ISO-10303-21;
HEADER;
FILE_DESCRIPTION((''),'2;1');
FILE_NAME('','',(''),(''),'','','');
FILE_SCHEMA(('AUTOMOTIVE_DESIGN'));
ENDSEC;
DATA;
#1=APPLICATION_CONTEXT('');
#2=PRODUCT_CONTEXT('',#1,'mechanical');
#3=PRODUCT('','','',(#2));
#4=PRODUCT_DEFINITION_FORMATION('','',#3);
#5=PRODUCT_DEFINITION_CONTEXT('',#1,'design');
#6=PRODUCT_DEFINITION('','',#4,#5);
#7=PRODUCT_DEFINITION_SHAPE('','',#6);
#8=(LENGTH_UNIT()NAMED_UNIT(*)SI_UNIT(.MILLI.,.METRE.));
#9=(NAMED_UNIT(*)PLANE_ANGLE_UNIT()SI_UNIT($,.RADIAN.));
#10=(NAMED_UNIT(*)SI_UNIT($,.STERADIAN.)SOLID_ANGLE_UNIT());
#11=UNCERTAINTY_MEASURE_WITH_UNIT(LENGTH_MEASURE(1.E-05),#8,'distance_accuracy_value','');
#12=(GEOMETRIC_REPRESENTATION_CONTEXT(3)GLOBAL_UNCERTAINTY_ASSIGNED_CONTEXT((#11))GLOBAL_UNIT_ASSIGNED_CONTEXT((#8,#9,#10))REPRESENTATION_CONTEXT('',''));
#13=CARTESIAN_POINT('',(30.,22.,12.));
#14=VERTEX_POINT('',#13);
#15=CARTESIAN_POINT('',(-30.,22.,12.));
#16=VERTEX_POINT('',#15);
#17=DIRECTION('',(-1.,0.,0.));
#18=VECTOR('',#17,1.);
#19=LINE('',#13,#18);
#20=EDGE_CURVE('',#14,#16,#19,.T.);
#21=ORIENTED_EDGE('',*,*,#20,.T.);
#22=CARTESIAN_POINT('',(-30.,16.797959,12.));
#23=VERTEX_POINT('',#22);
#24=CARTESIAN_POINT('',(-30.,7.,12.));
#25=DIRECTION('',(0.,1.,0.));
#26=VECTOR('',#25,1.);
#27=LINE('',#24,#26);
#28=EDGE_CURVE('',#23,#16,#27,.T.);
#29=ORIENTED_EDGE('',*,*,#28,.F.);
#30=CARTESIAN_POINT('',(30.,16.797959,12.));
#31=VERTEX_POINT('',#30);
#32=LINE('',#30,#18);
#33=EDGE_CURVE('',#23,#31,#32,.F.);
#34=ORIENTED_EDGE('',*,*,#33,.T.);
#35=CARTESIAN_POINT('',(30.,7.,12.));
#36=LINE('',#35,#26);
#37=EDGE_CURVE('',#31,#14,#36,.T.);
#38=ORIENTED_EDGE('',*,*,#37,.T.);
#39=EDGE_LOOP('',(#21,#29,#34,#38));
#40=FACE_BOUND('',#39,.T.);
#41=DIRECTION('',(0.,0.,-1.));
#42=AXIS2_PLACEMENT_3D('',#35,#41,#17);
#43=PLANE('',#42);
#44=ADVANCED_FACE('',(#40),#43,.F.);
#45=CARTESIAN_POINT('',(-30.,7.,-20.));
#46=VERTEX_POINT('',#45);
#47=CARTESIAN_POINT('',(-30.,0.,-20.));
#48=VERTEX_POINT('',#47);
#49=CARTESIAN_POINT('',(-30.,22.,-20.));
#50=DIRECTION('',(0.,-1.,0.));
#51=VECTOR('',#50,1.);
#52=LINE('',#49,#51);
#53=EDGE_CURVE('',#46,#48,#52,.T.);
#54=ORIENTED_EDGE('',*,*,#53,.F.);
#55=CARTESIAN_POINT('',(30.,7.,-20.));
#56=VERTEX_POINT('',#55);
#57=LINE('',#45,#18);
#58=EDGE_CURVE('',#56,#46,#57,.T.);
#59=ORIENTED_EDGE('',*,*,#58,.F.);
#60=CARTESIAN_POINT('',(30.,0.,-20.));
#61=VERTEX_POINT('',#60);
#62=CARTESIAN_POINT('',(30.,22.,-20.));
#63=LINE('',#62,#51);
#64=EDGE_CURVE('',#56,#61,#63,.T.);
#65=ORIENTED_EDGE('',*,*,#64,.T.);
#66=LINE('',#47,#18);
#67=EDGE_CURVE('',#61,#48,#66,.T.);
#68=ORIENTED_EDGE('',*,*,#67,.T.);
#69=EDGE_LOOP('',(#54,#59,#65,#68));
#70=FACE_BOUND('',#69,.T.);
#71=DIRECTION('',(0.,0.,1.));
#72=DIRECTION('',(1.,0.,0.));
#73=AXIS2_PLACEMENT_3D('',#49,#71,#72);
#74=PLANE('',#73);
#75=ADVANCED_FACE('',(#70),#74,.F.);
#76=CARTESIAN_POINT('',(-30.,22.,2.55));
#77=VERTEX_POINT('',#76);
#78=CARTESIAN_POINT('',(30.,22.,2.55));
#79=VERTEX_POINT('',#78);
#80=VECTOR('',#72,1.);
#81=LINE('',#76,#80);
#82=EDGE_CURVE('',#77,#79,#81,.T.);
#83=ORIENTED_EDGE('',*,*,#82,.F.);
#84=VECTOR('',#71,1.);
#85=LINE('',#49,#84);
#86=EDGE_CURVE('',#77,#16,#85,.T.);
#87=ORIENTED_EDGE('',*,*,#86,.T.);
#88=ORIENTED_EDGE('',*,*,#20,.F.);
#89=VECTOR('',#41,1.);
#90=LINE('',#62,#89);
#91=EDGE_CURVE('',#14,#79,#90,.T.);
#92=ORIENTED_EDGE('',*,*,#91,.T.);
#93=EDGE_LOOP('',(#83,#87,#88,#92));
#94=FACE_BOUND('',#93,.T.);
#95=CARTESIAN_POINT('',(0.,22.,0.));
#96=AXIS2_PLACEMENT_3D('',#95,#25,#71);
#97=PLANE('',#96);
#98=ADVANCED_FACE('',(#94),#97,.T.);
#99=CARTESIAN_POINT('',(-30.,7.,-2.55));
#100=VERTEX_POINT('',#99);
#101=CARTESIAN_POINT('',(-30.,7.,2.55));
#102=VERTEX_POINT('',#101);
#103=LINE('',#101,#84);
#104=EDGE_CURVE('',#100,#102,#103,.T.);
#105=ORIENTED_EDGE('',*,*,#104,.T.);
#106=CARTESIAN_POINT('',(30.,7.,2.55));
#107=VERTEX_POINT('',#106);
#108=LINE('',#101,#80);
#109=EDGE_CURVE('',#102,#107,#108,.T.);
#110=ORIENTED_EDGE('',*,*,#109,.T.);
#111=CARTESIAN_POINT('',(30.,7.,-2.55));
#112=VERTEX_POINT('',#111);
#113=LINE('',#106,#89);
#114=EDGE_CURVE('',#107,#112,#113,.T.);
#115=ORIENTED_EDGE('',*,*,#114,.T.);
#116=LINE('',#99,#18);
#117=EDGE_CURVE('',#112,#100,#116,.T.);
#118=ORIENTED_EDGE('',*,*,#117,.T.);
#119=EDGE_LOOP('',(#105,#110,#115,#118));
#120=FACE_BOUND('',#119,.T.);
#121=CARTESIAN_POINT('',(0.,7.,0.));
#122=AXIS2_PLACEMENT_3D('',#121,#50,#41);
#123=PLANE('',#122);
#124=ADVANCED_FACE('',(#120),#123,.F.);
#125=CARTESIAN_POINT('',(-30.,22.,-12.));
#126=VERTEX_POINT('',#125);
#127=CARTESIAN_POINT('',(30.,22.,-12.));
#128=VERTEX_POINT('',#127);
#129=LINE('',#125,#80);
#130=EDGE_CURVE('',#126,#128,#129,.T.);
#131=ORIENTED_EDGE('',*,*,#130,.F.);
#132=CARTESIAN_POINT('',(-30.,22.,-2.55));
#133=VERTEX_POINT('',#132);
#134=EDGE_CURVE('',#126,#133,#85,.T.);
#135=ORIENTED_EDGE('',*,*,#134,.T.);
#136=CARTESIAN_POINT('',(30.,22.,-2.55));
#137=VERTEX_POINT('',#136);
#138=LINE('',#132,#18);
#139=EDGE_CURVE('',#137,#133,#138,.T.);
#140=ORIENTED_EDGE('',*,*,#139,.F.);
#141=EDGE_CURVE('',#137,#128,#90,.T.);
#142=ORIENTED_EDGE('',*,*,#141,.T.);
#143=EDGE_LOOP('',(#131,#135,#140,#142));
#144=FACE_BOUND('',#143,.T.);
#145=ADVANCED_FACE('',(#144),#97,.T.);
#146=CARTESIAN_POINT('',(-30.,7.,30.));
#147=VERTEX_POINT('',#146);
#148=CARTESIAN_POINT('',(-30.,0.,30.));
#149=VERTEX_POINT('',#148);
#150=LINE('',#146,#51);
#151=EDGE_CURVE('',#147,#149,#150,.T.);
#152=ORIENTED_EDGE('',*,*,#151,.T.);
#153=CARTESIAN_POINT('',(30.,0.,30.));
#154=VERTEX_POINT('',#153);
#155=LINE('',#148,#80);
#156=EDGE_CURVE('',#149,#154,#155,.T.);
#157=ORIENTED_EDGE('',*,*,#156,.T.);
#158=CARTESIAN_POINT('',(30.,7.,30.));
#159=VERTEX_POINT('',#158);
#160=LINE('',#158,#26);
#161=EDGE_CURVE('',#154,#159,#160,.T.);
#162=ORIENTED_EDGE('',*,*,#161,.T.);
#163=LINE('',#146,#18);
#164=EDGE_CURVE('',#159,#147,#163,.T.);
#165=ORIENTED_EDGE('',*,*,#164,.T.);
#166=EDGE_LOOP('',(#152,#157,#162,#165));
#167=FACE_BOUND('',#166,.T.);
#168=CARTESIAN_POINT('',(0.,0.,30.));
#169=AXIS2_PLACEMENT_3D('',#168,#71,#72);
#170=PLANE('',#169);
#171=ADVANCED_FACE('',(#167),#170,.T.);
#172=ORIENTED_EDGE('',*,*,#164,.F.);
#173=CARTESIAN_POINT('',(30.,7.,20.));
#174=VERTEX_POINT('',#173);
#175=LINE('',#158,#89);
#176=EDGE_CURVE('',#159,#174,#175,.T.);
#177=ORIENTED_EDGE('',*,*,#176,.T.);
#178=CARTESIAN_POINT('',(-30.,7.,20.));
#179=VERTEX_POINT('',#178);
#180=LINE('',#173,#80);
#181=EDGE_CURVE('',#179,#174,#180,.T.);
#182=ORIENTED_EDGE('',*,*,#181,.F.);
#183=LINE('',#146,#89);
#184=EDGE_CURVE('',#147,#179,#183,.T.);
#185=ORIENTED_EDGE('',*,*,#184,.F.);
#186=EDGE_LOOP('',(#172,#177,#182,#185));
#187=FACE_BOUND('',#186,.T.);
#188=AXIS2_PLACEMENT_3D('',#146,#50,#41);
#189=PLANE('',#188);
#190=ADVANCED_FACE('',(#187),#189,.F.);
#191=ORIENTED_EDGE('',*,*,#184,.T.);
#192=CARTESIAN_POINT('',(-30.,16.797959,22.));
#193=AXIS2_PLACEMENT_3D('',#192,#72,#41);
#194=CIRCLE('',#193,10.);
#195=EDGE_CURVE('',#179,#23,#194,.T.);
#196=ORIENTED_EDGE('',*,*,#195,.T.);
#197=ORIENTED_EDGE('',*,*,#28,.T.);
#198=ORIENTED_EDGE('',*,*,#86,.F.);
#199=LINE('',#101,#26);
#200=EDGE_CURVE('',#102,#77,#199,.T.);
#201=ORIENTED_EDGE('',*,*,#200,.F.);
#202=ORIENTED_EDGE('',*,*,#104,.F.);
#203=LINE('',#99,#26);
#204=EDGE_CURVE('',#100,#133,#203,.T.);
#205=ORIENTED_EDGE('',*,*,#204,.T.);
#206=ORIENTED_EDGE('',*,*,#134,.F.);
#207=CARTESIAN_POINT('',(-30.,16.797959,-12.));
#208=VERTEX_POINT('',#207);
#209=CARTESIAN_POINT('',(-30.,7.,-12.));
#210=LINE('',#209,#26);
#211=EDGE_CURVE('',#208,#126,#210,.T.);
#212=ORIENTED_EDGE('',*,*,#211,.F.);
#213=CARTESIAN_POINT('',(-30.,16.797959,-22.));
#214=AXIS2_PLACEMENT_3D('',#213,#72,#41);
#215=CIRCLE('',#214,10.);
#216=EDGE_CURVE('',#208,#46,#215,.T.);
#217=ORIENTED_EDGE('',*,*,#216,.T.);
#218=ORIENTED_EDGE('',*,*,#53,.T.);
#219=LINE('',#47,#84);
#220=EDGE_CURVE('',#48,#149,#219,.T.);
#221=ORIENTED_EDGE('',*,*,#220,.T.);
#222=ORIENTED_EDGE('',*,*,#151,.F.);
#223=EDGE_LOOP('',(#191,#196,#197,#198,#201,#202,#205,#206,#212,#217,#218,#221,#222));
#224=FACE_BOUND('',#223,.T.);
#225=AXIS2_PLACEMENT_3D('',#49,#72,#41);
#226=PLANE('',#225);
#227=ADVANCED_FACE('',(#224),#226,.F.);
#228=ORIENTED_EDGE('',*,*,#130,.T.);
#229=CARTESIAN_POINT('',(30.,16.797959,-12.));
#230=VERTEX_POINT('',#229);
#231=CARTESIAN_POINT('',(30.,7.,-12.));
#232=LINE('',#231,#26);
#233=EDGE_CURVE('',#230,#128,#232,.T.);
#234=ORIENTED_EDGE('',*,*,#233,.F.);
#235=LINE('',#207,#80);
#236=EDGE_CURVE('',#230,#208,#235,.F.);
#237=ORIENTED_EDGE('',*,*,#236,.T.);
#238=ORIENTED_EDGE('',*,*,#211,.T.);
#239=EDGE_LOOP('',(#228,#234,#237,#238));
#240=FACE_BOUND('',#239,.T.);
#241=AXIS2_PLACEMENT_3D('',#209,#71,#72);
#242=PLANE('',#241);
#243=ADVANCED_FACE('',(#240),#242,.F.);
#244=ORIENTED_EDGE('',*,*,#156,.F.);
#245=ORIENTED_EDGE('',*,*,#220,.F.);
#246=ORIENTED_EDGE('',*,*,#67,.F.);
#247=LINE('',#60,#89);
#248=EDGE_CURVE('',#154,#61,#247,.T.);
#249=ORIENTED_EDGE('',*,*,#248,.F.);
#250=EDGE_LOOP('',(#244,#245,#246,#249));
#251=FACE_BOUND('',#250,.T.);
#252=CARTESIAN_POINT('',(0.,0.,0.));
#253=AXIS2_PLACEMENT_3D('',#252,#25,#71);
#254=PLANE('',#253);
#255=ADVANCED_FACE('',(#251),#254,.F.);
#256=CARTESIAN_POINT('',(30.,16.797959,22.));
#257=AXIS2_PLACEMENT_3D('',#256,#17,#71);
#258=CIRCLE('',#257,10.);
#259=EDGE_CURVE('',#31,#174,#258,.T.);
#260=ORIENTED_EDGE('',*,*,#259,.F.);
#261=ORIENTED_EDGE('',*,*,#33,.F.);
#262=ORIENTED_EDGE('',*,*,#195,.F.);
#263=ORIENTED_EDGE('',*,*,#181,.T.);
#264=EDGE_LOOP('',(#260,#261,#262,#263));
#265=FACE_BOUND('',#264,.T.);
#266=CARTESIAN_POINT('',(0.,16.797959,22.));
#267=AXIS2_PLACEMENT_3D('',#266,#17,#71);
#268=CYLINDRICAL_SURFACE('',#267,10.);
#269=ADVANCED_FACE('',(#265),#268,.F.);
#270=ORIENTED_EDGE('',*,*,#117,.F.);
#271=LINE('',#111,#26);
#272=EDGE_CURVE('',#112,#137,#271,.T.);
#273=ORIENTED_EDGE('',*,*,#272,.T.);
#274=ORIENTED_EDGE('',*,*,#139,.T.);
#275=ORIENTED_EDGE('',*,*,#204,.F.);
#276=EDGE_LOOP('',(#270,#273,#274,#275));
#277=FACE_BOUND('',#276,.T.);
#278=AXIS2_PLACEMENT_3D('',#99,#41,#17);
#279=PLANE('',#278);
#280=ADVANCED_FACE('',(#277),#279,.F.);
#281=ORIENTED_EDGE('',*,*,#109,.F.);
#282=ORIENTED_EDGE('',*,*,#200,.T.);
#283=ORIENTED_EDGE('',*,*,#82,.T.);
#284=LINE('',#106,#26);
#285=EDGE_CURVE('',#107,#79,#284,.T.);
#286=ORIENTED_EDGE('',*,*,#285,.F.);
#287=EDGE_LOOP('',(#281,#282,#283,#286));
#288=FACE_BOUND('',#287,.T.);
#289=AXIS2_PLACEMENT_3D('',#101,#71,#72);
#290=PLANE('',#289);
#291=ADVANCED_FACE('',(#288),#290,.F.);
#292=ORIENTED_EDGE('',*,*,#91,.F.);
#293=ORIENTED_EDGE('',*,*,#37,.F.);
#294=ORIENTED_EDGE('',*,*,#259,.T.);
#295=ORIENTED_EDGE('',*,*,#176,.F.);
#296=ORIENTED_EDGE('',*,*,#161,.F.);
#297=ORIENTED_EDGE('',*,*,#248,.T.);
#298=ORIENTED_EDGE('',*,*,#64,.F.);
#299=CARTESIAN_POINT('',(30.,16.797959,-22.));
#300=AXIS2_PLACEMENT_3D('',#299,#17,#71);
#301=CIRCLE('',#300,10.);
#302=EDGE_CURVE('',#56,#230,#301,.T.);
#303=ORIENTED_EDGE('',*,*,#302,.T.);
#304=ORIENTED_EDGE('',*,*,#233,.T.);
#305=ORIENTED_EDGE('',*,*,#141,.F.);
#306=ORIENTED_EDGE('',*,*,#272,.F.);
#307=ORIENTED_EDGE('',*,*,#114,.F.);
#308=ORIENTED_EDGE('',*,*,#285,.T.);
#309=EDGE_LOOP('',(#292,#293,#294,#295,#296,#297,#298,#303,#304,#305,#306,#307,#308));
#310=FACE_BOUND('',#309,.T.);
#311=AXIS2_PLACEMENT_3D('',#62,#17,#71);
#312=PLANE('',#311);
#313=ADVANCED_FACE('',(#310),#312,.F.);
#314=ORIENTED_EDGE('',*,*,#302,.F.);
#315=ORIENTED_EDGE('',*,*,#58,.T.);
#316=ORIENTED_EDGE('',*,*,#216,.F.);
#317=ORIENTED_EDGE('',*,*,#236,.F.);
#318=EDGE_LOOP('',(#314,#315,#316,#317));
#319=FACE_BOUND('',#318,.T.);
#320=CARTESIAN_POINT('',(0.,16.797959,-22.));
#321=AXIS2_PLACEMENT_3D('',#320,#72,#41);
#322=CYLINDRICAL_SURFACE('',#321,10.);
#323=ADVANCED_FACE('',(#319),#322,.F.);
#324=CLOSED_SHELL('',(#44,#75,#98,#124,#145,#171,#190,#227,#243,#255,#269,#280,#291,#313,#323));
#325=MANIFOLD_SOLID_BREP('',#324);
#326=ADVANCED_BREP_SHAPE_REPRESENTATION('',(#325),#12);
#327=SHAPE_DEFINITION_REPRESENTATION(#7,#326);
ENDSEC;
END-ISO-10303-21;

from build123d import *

# Parameters (mm, degrees)
SKETCH1_W           = 60
SKETCH1_H           = 40
BOSS_EXTRUDE1_DEPTH = 22
SKETCH2_W           = 60
SKETCH2_H           = 5.1
SKETCH2_H_2         = 8
CUT_EXTRUDE1_DEPTH  = 15
FILLET1_R           = 10
SKETCH3_W           = 60
SKETCH3_H           = 7
BOSS_EXTRUDE2_DEPTH = 10


with BuildPart() as part:
    # Sketch1 → Boss-Extrude1 (new body)
    with BuildSketch(Plane(origin=(0, 0, 0), x_dir=(1, 0, 0), z_dir=(0, 1, 0))):
        Rectangle(SKETCH1_W, SKETCH1_H)
    extrude(amount=BOSS_EXTRUDE1_DEPTH)

    # Sketch2 → Cut-Extrude1 (cut)
    with BuildSketch(Plane(origin=(0, 22, 0), x_dir=(1, 0, 0), z_dir=(0, 1, 0))):
        Rectangle(SKETCH2_W, SKETCH2_H)
        with Locations((0, 16)):
            Rectangle(SKETCH2_W, SKETCH2_H_2)
        with Locations((0, -16)):
            Rectangle(SKETCH2_W, SKETCH2_H_2)
    extrude(amount=-CUT_EXTRUDE1_DEPTH, mode=Mode.SUBTRACT)

    # Fillet1
    # the kernel refuses this fillet: 10 mm, written as the material it adds along each edge
    with BuildSketch(Plane(origin=(-30, 7, 12), x_dir=(0, 0, 1), z_dir=(1, 0, 0)), Plane(origin=(30, 7, -12), x_dir=(0, 0, -1), z_dir=(-1, 0, 0))) as fillet1_piece_1:
        with BuildLine():
            CenterArc((10, -9.797958971), FILLET1_R, 101.536959033, 78.463040967)
            Line((0, -9.797958971), (-0.2, -9.797958971))
            Line((-0.2, -9.797958971), (-0.2, 0))
            Line((-0.2, 0), (0, 0.2))
            ThreePointArc((0, 0.2), (4, 0.2), (7.96, 0.195959179))
            Line((7.96, 0.195959179), (8, 0))
        make_face()
    extrude(amount=60)

    # Sketch3 → Boss-Extrude2 (add)
    with BuildSketch(Plane.XY.offset(20)):
        with Locations((0, 3.5)):
            Rectangle(SKETCH3_W, SKETCH3_H)
    extrude(amount=BOSS_EXTRUDE2_DEPTH)


solid = part.part
